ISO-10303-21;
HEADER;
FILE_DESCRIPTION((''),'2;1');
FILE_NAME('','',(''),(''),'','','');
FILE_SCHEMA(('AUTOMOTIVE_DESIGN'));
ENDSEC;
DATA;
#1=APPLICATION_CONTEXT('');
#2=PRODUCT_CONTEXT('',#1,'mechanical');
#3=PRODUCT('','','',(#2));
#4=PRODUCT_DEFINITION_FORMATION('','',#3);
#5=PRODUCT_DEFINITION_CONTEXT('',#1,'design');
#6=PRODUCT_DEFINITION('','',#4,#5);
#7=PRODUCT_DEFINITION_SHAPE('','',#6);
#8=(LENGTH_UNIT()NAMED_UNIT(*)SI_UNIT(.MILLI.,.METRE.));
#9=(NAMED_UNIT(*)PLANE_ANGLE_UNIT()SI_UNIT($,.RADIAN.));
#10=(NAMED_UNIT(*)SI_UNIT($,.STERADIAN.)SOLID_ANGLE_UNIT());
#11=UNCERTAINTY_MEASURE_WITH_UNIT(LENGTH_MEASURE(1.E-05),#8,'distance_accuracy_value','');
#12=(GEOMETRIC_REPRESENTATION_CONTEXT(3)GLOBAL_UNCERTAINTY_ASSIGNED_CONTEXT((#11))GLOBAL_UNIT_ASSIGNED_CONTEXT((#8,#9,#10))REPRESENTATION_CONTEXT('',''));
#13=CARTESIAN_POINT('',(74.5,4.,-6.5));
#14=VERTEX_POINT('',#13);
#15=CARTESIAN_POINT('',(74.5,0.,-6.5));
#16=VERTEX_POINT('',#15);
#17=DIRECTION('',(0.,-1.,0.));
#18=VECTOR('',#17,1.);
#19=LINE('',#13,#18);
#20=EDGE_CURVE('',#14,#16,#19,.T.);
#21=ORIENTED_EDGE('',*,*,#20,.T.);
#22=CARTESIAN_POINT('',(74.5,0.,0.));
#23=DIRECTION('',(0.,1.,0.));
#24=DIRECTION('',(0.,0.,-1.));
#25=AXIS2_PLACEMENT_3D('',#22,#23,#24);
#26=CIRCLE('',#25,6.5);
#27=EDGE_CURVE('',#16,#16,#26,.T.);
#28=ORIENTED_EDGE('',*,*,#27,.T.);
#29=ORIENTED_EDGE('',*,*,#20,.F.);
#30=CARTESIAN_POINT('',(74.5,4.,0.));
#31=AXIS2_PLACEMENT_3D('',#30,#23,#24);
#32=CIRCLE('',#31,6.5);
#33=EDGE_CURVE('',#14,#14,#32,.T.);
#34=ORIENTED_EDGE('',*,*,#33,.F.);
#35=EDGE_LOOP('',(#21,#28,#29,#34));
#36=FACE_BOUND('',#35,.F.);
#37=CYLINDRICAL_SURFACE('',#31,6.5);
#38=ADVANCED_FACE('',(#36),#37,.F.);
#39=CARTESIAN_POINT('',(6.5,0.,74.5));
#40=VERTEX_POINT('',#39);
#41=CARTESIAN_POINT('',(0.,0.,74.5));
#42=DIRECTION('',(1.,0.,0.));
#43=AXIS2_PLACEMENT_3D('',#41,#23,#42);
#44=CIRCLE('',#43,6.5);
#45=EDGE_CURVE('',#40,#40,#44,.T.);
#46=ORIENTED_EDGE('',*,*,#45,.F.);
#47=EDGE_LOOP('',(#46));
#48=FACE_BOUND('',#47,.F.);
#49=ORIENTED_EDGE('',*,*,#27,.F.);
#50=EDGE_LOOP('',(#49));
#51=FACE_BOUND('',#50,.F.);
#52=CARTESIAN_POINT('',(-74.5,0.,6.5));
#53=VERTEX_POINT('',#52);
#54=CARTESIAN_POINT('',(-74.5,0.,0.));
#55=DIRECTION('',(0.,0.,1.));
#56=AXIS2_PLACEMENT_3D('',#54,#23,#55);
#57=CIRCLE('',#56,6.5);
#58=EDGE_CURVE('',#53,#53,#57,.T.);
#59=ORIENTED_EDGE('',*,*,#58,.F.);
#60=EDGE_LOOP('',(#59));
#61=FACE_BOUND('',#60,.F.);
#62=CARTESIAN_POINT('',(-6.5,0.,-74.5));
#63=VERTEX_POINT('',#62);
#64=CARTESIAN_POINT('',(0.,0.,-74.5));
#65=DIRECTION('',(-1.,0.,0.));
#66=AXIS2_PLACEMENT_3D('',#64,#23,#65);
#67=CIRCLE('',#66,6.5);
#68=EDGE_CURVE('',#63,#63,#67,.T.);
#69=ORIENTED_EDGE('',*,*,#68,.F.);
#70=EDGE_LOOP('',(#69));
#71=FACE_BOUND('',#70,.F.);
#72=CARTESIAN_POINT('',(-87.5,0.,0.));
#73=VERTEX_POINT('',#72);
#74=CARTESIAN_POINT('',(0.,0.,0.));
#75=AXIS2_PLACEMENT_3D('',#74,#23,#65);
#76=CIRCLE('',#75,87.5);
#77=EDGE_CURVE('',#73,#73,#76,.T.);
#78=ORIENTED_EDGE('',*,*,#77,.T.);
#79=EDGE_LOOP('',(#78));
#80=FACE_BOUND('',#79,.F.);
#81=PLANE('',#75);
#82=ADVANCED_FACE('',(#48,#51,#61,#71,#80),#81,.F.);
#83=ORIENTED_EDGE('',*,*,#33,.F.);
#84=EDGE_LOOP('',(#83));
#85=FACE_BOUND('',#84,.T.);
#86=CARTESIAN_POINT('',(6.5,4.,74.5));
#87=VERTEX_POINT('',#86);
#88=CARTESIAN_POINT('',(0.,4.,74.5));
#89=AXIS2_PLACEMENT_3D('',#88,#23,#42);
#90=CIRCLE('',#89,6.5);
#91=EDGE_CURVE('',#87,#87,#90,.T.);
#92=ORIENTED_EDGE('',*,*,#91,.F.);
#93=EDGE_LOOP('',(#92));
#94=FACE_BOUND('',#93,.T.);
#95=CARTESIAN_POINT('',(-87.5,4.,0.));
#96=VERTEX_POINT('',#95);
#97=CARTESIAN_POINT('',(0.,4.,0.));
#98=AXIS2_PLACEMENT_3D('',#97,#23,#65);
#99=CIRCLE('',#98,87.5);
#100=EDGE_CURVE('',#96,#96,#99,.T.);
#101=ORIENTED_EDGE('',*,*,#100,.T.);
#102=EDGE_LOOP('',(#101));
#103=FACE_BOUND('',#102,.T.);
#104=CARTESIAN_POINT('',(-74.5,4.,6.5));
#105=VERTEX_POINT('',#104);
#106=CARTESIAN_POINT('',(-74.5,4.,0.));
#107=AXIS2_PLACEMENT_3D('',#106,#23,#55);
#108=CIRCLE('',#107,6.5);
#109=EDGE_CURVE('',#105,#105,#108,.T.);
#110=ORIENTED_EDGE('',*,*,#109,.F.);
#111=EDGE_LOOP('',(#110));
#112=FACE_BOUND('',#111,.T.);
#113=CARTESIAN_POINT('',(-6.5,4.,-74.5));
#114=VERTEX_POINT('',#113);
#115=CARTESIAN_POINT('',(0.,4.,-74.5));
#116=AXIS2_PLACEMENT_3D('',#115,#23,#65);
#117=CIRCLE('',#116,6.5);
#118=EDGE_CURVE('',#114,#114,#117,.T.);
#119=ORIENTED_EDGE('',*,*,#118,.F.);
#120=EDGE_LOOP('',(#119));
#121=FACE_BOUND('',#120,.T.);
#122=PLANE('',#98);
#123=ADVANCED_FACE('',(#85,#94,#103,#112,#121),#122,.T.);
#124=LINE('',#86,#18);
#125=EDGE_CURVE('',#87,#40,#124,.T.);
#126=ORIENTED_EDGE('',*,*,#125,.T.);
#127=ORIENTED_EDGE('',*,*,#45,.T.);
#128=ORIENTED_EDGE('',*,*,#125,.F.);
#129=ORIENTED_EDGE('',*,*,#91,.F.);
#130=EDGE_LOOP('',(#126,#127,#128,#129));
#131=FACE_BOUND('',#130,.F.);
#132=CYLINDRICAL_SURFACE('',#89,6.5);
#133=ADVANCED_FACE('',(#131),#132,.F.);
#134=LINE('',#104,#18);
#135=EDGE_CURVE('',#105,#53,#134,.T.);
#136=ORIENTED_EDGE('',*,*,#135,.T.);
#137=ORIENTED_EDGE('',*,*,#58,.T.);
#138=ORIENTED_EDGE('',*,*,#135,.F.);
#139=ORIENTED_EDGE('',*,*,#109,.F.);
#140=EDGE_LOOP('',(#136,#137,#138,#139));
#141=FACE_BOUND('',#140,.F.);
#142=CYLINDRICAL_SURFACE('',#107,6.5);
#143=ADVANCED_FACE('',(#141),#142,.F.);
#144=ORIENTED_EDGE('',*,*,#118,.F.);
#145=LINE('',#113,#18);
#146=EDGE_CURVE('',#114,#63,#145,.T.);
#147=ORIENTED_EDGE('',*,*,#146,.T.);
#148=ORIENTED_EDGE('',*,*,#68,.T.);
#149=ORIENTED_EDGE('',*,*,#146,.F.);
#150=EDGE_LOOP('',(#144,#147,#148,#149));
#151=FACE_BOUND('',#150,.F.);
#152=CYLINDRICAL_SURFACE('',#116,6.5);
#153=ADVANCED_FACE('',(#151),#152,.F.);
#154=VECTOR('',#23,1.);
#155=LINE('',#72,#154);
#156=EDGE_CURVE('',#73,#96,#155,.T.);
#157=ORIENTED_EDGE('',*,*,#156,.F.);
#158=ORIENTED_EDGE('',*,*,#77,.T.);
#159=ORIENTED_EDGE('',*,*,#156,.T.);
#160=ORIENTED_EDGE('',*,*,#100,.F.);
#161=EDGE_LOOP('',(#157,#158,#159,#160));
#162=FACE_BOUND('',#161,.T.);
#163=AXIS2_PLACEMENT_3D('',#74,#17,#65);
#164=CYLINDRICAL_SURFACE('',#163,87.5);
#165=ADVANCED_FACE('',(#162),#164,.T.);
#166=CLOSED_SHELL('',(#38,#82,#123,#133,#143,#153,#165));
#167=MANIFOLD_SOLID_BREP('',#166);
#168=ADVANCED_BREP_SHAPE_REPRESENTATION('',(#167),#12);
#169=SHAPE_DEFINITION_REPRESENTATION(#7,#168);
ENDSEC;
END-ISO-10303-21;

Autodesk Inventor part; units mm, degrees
ref_plane "YZ Plane" through (0, 0, 0) normal (1, 0, 0) x (0, 1, 0)
ref_plane "XZ Plane" through (0, 0, 0) normal (0, 1, 0) x (-1, 0, 0)
ref_plane "XY Plane" through (0, 0, 0) normal (0, 0, 1) x (1, 0, 0)
sketch "Sketch1" plane through (0, 0, 0) normal (0, 1, 0) x (-1, 0, 0)
  circle A0 centre (0, 0) radius 87.5
  dimension "d0" = 175
extrude "Plate1" add sketch "Sketch1" along normal blind 4
sketch "Sketch2" plane through (0, 4, 0) normal (0, 1, 0) x (1, 0, 0)
  line L0 (-40, -40) -> (40, -40) construction
  line L1 (40, -40) -> (40, 40) construction
  line L2 (40, 40) -> (-40, 40) construction
  line L3 (-40, 40) -> (-40, -40) construction
  line L4 (40, -40) -> (-40, 40) construction
  circle A0 centre (0, 0) radius 87.5 projected
  line L5 (0, 0) -> (0, -87.5) construction
  circle A1 centre (0, -74.5) radius 6.5
  dimension "d2" = 80
  dimension "d3" = 80
  dimension "d16" = 13
  dimension "d23" = 74.5
extrude "Extrusion1" cut sketch "Sketch2" against normal through all contours A1
pattern_circular "Circular Pattern1" count 4 over 360 about axis through (0, -10, 0) along (0, 1, 0) of "Extrusion1"
sketch "Sketch3" plane through (0, 4, 0) normal (0, 1, 0) x (1, 0, 0)
  line L0 (9.823, 55.7091) -> (-55.7091, 9.823)
  line L1 (-55.7091, 9.823) -> (-9.823, -55.7091)
  line L2 (-9.823, -55.7091) -> (55.7091, -9.823)
  line L3 (55.7091, -9.823) -> (9.823, 55.7091) construction
  line L4 (32.7661, 22.9431) -> (-32.7661, -22.9431) construction
  line L5 (0, 0) -> (26.1739, 0) construction
  line L6 (-55.7091, -9.823) -> (9.823, -55.7091)
  line L7 (9.823, -55.7091) -> (55.7091, 9.823)
  line L8 (55.7091, 9.823) -> (-9.823, 55.7091) construction
  line L9 (-9.823, 55.7091) -> (-55.7091, -9.823)
  line L10 (22.9431, 32.7661) -> (-22.9431, -32.7661)
  line L11 (9.823, -55.7091) -> (39.823, -55.7091)
  line L12 (-55.7091, 9.823) -> (-55.7091, 39.823)
  dimension "d18" = 80
  dimension "d19" = 35
  dimension "d20" = 55
  dimension "d21" = 30
  dimension "d22" = 30
mark "Mark1"
equation "\"d1\" = Thickness"
equation "\"BendReliefWidth\" = Thickness"
equation "\"BendReliefDepth\" = 0.5 * Thickness"
equation "\"CornerReliefSize\" = 4 * Thickness"
equation "\"MinimumRemnant\" = 2 * Thickness"
equation "\"TransitionRadius\" = BendRadius"
equation "\"JacobiRadiusSize\" = BendRadius"
equation "\"GapSize\" = Thickness"
equation "\"Thickness\" = 4"
equation "\"BendRadius\" = 5"
properties part number "MSC 904 FLANGE BASE TUBE" material "Stainless Steel"
